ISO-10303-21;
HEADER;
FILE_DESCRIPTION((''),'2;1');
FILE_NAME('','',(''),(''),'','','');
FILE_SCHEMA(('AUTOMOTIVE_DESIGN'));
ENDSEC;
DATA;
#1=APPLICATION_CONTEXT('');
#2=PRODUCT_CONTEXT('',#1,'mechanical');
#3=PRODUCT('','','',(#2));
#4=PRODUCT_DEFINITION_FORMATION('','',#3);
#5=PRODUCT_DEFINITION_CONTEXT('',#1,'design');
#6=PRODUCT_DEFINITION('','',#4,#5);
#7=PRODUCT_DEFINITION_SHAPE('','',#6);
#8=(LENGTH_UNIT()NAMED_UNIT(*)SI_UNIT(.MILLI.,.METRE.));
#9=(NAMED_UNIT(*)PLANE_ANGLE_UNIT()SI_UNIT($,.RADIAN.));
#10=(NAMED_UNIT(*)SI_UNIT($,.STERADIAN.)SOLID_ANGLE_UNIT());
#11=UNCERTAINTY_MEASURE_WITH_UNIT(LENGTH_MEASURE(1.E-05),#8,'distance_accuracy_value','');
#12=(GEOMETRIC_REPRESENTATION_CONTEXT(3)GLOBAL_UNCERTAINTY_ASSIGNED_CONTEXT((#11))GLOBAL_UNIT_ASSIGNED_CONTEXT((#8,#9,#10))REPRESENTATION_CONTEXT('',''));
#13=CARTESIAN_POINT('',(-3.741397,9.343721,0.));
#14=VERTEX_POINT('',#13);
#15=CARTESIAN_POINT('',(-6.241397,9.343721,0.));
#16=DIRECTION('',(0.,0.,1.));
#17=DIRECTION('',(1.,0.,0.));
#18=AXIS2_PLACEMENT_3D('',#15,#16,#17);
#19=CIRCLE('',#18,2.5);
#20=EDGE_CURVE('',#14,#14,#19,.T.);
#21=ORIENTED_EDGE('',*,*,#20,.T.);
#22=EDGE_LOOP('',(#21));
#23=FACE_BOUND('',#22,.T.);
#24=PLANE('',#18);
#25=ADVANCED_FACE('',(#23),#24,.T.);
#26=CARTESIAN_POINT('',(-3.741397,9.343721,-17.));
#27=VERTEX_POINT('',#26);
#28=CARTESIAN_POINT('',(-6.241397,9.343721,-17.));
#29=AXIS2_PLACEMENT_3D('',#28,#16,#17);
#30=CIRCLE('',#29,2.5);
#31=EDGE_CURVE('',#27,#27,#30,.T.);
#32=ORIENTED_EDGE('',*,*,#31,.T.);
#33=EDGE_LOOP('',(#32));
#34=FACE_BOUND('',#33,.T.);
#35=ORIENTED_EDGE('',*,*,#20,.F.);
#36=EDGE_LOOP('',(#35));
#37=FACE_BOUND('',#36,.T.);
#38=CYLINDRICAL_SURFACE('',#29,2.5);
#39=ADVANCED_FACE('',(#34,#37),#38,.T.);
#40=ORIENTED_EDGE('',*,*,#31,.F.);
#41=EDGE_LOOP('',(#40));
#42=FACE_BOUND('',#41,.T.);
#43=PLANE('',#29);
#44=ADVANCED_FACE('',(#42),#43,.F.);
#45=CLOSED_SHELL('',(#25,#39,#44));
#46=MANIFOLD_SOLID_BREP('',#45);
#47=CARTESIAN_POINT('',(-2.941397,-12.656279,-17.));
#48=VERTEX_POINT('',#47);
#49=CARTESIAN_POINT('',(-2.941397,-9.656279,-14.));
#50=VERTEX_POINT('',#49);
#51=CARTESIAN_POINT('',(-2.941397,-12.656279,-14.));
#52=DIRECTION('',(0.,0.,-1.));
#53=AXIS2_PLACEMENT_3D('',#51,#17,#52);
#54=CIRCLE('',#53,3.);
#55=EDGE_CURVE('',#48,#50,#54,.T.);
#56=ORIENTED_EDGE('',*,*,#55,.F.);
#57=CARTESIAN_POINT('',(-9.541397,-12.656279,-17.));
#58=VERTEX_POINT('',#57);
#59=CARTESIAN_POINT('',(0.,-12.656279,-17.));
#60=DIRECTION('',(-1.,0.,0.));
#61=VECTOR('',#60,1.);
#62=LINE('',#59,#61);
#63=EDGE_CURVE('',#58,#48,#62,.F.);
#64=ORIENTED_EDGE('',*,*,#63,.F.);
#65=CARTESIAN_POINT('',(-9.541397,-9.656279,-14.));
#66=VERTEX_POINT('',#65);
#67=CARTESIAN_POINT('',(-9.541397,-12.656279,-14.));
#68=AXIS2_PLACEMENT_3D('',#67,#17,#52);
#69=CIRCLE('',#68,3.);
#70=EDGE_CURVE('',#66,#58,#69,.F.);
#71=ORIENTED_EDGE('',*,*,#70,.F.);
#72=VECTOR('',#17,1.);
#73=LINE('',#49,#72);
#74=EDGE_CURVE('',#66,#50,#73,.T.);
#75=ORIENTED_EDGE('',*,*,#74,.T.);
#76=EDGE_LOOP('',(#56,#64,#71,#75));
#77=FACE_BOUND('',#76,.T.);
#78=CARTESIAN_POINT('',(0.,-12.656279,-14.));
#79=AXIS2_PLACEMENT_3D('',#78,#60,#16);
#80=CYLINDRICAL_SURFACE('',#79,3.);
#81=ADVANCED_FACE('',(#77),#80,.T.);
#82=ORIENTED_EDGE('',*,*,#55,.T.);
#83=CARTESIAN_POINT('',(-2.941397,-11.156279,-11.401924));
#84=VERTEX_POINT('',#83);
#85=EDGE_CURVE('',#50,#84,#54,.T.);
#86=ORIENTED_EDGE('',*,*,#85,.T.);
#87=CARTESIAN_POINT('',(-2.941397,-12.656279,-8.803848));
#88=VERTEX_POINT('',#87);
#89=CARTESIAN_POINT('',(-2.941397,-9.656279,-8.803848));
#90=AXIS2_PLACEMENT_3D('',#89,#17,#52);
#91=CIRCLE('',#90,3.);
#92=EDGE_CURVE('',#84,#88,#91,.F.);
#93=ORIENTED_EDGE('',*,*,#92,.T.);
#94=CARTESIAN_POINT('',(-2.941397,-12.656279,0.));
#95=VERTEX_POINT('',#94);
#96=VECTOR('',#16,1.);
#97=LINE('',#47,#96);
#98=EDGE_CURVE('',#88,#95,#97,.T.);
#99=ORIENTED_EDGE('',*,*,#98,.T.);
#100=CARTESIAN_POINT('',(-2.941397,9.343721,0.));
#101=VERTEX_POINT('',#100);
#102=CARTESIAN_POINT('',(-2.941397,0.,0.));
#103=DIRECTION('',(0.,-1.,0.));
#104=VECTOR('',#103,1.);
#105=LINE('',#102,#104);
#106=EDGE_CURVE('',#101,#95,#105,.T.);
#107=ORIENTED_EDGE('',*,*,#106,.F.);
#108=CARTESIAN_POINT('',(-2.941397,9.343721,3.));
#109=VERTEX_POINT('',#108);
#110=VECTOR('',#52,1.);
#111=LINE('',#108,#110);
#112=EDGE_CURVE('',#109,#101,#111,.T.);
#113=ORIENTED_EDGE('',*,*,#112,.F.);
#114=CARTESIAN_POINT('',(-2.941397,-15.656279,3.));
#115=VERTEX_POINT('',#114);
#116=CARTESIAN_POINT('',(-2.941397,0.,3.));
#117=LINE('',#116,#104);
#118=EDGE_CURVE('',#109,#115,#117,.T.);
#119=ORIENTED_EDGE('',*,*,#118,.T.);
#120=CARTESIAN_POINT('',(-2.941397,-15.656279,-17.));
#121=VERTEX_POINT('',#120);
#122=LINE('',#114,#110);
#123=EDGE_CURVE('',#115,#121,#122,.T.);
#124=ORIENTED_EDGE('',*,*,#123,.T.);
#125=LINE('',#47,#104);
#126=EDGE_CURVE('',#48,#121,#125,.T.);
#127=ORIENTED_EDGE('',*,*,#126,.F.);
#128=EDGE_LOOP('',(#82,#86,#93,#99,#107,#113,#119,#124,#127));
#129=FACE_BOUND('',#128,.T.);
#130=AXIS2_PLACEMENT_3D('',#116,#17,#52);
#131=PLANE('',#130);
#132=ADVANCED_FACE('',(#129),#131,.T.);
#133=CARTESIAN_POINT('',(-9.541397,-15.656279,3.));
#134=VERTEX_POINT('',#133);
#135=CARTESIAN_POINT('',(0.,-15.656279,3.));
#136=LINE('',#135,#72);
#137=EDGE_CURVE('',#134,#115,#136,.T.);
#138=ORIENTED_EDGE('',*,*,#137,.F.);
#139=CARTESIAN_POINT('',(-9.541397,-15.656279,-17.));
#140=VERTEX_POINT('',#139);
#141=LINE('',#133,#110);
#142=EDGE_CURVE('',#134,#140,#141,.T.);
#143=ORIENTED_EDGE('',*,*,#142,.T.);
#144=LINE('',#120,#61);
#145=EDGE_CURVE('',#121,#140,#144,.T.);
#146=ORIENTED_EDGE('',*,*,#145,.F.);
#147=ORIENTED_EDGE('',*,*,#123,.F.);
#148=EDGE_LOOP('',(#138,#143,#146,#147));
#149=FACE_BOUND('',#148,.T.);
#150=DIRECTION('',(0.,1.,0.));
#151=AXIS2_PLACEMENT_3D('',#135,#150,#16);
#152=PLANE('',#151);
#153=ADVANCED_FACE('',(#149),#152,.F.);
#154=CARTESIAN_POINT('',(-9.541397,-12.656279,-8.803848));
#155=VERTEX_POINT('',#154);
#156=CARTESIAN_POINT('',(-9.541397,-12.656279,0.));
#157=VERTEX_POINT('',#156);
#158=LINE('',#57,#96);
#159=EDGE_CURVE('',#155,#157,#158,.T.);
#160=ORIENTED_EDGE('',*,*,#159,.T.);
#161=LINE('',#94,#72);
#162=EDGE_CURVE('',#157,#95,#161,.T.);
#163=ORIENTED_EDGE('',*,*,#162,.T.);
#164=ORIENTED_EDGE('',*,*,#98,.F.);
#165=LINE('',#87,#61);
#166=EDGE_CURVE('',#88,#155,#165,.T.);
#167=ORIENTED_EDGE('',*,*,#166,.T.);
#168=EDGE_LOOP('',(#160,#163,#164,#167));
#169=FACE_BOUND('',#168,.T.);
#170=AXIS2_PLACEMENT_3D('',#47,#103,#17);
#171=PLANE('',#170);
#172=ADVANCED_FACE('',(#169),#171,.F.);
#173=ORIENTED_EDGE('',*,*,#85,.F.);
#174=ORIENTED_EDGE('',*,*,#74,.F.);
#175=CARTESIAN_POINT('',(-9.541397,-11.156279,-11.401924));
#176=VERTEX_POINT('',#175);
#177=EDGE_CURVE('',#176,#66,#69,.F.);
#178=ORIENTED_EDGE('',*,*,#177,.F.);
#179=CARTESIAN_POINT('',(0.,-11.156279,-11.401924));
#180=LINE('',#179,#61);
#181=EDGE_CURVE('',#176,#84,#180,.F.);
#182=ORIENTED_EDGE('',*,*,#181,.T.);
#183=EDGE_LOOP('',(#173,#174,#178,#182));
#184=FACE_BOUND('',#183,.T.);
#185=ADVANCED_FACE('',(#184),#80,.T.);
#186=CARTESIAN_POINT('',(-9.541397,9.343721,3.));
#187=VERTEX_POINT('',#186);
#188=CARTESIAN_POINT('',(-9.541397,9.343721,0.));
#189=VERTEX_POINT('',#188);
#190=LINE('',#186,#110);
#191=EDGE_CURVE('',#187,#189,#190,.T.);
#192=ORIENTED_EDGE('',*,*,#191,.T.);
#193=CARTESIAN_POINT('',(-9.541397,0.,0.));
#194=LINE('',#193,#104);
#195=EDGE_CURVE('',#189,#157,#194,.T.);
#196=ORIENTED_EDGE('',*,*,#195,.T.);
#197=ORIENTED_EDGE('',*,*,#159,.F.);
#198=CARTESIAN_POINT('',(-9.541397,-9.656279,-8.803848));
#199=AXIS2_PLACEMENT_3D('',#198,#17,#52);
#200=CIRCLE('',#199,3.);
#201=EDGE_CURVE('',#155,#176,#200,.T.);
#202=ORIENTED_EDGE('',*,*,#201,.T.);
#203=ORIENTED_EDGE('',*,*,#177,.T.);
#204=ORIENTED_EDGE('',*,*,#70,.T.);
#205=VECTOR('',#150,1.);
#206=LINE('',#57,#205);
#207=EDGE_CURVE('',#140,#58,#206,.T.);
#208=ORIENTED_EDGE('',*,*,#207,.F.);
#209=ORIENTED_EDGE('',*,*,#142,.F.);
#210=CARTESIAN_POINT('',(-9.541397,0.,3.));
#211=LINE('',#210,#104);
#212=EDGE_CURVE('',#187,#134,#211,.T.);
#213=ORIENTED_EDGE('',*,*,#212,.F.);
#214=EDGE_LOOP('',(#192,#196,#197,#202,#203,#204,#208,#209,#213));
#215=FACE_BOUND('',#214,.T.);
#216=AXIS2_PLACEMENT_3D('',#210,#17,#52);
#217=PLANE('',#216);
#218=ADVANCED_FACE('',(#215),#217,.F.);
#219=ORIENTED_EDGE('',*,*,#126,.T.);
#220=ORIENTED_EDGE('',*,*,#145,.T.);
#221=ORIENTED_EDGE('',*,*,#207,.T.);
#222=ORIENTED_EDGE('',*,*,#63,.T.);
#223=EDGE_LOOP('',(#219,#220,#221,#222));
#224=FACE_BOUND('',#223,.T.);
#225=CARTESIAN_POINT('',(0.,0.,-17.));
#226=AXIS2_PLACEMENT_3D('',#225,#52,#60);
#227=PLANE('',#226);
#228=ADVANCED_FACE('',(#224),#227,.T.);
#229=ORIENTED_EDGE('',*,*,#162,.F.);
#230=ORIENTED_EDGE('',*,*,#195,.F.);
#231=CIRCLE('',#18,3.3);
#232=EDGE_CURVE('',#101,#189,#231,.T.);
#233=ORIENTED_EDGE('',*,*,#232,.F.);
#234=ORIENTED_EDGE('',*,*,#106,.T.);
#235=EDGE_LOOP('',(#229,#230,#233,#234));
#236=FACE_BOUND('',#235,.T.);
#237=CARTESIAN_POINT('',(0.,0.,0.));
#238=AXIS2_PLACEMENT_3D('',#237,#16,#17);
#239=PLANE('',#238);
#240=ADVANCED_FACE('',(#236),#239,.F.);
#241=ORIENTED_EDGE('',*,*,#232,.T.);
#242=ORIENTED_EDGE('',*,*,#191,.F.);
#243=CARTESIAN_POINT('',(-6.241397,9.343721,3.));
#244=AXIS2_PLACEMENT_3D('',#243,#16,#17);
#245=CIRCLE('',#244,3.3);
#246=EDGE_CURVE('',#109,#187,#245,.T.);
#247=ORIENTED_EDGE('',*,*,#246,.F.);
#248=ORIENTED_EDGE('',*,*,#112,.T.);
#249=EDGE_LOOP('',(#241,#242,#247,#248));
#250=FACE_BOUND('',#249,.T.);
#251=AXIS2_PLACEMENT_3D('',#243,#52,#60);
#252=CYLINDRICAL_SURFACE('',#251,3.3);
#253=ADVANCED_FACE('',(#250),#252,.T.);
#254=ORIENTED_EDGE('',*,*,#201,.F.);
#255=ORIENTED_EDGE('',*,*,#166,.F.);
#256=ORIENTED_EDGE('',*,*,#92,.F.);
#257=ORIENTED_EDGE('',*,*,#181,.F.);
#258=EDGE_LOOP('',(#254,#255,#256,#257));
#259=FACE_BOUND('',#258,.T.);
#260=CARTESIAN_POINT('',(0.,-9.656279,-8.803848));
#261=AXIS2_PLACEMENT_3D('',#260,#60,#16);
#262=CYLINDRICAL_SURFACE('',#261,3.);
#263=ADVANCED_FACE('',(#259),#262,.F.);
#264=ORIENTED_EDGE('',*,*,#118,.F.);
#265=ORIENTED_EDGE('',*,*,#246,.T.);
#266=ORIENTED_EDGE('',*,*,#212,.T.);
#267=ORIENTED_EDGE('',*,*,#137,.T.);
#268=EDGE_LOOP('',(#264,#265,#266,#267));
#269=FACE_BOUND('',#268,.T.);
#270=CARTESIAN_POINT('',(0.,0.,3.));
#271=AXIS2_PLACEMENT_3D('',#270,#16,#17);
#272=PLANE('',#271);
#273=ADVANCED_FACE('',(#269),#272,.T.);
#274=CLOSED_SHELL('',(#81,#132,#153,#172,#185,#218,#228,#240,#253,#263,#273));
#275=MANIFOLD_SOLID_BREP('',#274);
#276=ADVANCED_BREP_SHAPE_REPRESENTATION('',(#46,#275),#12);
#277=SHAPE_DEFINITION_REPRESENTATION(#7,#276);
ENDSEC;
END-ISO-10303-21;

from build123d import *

# Parameters (mm, degrees)
SKETCH1_R           = 2.5
BOSS_EXTRUDE1_DEPTH = 17
SKETCH2_R           = 2.5
BOSS_EXTRUDE2_DEPTH = 3
SKETCH3_W           = 6.6
SKETCH3_H           = 3
BOSS_EXTRUDE3_DEPTH = 17
SKETCH4_W           = 6.6
SKETCH4_H           = 6
BOSS_EXTRUDE4_DEPTH = 3
FILLET1_R           = 3
FILLET2_R           = 3
FILLET3_R           = 3


with BuildPart() as part:
    # Sketch1 → Boss-Extrude1 (new body)
    with BuildSketch(Plane.XY):
        with Locations((-6.241397348, 9.343721229)):
            Circle(SKETCH1_R)
    extrude(amount=-BOSS_EXTRUDE1_DEPTH)


with BuildPart() as body_2:
    # Sketch2 → Boss-Extrude2 (new body)
    with BuildSketch(Plane.XY):
        with BuildLine():
            ThreePointArc((-8.741397348, 9.343721229), (-6.241397348, 11.843721229), (-3.741397348, 9.343721229))
            Line((-3.741397348, 9.343721229), (-2.941397348, 9.343721229))
            ThreePointArc((-2.941397348, 9.343721229), (-6.241397348, 12.643721229), (-9.541397348, 9.343721229))
            Line((-9.541397348, 9.343721229), (-8.741397348, 9.343721229))
        make_face()
        with BuildLine():
            Line((-2.941397348, 9.343721229), (-3.741397348, 9.343721229))
            ThreePointArc((-3.741397348, 9.343721229), (-6.241397348, 6.843721229), (-8.741397348, 9.343721229))
            Line((-8.741397348, 9.343721229), (-9.541397348, 9.343721229))
            ThreePointArc((-9.541397348, 9.343721229), (-6.241397348, 6.043721229), (-2.941397348, 9.343721229))
        make_face()
        with BuildLine():
            Line((-2.941397348, -15.656278771), (-2.941397348, 9.343721229))
            ThreePointArc((-2.941397348, 9.343721229), (-6.241397348, 6.043721229), (-9.541397348, 9.343721229))
            Line((-9.541397348, 9.343721229), (-9.541397348, -15.656278771))
            Line((-9.541397348, -15.656278771), (-2.941397348, -15.656278771))
        make_face()
        with Locations((-6.241397348, 9.343721229)):
            Circle(SKETCH2_R)
    extrude(amount=BOSS_EXTRUDE2_DEPTH)

    # Sketch3 → Boss-Extrude3 (add)
    with BuildSketch(Plane(origin=(0, 0, 0), x_dir=(-1, 0, 0), z_dir=(0, 0, -1))):
        with Locations((6.241397348, -14.156278771)):
            Rectangle(SKETCH3_W, SKETCH3_H)
    extrude(amount=BOSS_EXTRUDE3_DEPTH)

    # Sketch4 → Boss-Extrude4 (add)
    with BuildSketch(Plane(origin=(0, -12.656278771, 0), x_dir=(1, 0, 0), z_dir=(0, 1, 0))):
        with Locations((-6.241397348, 14)):
            Rectangle(SKETCH4_W, SKETCH4_H)
    extrude(amount=BOSS_EXTRUDE4_DEPTH)

    # Fillet1
    fillet1_edges = [body_2.edges().sort_by_distance(p)[0] for p in [
        (-6.241397348, -9.656278771, -11),
    ]]
    fillet(fillet1_edges, radius=FILLET1_R - 0.0001)  # a hair under: the kernel refuses the full size

    # Fillet2
    fillet2_edges = [body_2.edges().sort_by_distance(p)[0] for p in [
        (-6.241397348, -12.656278771, -11),
    ]]
    fillet(fillet2_edges, radius=FILLET2_R)

    # Fillet3
    fillet3_edges = [body_2.edges().sort_by_distance(p)[0] for p in [
        (-6.241397348, -9.656278771, -17),
    ]]
    fillet(fillet3_edges, radius=FILLET3_R)


solid = Compound([part.part, body_2.part])
